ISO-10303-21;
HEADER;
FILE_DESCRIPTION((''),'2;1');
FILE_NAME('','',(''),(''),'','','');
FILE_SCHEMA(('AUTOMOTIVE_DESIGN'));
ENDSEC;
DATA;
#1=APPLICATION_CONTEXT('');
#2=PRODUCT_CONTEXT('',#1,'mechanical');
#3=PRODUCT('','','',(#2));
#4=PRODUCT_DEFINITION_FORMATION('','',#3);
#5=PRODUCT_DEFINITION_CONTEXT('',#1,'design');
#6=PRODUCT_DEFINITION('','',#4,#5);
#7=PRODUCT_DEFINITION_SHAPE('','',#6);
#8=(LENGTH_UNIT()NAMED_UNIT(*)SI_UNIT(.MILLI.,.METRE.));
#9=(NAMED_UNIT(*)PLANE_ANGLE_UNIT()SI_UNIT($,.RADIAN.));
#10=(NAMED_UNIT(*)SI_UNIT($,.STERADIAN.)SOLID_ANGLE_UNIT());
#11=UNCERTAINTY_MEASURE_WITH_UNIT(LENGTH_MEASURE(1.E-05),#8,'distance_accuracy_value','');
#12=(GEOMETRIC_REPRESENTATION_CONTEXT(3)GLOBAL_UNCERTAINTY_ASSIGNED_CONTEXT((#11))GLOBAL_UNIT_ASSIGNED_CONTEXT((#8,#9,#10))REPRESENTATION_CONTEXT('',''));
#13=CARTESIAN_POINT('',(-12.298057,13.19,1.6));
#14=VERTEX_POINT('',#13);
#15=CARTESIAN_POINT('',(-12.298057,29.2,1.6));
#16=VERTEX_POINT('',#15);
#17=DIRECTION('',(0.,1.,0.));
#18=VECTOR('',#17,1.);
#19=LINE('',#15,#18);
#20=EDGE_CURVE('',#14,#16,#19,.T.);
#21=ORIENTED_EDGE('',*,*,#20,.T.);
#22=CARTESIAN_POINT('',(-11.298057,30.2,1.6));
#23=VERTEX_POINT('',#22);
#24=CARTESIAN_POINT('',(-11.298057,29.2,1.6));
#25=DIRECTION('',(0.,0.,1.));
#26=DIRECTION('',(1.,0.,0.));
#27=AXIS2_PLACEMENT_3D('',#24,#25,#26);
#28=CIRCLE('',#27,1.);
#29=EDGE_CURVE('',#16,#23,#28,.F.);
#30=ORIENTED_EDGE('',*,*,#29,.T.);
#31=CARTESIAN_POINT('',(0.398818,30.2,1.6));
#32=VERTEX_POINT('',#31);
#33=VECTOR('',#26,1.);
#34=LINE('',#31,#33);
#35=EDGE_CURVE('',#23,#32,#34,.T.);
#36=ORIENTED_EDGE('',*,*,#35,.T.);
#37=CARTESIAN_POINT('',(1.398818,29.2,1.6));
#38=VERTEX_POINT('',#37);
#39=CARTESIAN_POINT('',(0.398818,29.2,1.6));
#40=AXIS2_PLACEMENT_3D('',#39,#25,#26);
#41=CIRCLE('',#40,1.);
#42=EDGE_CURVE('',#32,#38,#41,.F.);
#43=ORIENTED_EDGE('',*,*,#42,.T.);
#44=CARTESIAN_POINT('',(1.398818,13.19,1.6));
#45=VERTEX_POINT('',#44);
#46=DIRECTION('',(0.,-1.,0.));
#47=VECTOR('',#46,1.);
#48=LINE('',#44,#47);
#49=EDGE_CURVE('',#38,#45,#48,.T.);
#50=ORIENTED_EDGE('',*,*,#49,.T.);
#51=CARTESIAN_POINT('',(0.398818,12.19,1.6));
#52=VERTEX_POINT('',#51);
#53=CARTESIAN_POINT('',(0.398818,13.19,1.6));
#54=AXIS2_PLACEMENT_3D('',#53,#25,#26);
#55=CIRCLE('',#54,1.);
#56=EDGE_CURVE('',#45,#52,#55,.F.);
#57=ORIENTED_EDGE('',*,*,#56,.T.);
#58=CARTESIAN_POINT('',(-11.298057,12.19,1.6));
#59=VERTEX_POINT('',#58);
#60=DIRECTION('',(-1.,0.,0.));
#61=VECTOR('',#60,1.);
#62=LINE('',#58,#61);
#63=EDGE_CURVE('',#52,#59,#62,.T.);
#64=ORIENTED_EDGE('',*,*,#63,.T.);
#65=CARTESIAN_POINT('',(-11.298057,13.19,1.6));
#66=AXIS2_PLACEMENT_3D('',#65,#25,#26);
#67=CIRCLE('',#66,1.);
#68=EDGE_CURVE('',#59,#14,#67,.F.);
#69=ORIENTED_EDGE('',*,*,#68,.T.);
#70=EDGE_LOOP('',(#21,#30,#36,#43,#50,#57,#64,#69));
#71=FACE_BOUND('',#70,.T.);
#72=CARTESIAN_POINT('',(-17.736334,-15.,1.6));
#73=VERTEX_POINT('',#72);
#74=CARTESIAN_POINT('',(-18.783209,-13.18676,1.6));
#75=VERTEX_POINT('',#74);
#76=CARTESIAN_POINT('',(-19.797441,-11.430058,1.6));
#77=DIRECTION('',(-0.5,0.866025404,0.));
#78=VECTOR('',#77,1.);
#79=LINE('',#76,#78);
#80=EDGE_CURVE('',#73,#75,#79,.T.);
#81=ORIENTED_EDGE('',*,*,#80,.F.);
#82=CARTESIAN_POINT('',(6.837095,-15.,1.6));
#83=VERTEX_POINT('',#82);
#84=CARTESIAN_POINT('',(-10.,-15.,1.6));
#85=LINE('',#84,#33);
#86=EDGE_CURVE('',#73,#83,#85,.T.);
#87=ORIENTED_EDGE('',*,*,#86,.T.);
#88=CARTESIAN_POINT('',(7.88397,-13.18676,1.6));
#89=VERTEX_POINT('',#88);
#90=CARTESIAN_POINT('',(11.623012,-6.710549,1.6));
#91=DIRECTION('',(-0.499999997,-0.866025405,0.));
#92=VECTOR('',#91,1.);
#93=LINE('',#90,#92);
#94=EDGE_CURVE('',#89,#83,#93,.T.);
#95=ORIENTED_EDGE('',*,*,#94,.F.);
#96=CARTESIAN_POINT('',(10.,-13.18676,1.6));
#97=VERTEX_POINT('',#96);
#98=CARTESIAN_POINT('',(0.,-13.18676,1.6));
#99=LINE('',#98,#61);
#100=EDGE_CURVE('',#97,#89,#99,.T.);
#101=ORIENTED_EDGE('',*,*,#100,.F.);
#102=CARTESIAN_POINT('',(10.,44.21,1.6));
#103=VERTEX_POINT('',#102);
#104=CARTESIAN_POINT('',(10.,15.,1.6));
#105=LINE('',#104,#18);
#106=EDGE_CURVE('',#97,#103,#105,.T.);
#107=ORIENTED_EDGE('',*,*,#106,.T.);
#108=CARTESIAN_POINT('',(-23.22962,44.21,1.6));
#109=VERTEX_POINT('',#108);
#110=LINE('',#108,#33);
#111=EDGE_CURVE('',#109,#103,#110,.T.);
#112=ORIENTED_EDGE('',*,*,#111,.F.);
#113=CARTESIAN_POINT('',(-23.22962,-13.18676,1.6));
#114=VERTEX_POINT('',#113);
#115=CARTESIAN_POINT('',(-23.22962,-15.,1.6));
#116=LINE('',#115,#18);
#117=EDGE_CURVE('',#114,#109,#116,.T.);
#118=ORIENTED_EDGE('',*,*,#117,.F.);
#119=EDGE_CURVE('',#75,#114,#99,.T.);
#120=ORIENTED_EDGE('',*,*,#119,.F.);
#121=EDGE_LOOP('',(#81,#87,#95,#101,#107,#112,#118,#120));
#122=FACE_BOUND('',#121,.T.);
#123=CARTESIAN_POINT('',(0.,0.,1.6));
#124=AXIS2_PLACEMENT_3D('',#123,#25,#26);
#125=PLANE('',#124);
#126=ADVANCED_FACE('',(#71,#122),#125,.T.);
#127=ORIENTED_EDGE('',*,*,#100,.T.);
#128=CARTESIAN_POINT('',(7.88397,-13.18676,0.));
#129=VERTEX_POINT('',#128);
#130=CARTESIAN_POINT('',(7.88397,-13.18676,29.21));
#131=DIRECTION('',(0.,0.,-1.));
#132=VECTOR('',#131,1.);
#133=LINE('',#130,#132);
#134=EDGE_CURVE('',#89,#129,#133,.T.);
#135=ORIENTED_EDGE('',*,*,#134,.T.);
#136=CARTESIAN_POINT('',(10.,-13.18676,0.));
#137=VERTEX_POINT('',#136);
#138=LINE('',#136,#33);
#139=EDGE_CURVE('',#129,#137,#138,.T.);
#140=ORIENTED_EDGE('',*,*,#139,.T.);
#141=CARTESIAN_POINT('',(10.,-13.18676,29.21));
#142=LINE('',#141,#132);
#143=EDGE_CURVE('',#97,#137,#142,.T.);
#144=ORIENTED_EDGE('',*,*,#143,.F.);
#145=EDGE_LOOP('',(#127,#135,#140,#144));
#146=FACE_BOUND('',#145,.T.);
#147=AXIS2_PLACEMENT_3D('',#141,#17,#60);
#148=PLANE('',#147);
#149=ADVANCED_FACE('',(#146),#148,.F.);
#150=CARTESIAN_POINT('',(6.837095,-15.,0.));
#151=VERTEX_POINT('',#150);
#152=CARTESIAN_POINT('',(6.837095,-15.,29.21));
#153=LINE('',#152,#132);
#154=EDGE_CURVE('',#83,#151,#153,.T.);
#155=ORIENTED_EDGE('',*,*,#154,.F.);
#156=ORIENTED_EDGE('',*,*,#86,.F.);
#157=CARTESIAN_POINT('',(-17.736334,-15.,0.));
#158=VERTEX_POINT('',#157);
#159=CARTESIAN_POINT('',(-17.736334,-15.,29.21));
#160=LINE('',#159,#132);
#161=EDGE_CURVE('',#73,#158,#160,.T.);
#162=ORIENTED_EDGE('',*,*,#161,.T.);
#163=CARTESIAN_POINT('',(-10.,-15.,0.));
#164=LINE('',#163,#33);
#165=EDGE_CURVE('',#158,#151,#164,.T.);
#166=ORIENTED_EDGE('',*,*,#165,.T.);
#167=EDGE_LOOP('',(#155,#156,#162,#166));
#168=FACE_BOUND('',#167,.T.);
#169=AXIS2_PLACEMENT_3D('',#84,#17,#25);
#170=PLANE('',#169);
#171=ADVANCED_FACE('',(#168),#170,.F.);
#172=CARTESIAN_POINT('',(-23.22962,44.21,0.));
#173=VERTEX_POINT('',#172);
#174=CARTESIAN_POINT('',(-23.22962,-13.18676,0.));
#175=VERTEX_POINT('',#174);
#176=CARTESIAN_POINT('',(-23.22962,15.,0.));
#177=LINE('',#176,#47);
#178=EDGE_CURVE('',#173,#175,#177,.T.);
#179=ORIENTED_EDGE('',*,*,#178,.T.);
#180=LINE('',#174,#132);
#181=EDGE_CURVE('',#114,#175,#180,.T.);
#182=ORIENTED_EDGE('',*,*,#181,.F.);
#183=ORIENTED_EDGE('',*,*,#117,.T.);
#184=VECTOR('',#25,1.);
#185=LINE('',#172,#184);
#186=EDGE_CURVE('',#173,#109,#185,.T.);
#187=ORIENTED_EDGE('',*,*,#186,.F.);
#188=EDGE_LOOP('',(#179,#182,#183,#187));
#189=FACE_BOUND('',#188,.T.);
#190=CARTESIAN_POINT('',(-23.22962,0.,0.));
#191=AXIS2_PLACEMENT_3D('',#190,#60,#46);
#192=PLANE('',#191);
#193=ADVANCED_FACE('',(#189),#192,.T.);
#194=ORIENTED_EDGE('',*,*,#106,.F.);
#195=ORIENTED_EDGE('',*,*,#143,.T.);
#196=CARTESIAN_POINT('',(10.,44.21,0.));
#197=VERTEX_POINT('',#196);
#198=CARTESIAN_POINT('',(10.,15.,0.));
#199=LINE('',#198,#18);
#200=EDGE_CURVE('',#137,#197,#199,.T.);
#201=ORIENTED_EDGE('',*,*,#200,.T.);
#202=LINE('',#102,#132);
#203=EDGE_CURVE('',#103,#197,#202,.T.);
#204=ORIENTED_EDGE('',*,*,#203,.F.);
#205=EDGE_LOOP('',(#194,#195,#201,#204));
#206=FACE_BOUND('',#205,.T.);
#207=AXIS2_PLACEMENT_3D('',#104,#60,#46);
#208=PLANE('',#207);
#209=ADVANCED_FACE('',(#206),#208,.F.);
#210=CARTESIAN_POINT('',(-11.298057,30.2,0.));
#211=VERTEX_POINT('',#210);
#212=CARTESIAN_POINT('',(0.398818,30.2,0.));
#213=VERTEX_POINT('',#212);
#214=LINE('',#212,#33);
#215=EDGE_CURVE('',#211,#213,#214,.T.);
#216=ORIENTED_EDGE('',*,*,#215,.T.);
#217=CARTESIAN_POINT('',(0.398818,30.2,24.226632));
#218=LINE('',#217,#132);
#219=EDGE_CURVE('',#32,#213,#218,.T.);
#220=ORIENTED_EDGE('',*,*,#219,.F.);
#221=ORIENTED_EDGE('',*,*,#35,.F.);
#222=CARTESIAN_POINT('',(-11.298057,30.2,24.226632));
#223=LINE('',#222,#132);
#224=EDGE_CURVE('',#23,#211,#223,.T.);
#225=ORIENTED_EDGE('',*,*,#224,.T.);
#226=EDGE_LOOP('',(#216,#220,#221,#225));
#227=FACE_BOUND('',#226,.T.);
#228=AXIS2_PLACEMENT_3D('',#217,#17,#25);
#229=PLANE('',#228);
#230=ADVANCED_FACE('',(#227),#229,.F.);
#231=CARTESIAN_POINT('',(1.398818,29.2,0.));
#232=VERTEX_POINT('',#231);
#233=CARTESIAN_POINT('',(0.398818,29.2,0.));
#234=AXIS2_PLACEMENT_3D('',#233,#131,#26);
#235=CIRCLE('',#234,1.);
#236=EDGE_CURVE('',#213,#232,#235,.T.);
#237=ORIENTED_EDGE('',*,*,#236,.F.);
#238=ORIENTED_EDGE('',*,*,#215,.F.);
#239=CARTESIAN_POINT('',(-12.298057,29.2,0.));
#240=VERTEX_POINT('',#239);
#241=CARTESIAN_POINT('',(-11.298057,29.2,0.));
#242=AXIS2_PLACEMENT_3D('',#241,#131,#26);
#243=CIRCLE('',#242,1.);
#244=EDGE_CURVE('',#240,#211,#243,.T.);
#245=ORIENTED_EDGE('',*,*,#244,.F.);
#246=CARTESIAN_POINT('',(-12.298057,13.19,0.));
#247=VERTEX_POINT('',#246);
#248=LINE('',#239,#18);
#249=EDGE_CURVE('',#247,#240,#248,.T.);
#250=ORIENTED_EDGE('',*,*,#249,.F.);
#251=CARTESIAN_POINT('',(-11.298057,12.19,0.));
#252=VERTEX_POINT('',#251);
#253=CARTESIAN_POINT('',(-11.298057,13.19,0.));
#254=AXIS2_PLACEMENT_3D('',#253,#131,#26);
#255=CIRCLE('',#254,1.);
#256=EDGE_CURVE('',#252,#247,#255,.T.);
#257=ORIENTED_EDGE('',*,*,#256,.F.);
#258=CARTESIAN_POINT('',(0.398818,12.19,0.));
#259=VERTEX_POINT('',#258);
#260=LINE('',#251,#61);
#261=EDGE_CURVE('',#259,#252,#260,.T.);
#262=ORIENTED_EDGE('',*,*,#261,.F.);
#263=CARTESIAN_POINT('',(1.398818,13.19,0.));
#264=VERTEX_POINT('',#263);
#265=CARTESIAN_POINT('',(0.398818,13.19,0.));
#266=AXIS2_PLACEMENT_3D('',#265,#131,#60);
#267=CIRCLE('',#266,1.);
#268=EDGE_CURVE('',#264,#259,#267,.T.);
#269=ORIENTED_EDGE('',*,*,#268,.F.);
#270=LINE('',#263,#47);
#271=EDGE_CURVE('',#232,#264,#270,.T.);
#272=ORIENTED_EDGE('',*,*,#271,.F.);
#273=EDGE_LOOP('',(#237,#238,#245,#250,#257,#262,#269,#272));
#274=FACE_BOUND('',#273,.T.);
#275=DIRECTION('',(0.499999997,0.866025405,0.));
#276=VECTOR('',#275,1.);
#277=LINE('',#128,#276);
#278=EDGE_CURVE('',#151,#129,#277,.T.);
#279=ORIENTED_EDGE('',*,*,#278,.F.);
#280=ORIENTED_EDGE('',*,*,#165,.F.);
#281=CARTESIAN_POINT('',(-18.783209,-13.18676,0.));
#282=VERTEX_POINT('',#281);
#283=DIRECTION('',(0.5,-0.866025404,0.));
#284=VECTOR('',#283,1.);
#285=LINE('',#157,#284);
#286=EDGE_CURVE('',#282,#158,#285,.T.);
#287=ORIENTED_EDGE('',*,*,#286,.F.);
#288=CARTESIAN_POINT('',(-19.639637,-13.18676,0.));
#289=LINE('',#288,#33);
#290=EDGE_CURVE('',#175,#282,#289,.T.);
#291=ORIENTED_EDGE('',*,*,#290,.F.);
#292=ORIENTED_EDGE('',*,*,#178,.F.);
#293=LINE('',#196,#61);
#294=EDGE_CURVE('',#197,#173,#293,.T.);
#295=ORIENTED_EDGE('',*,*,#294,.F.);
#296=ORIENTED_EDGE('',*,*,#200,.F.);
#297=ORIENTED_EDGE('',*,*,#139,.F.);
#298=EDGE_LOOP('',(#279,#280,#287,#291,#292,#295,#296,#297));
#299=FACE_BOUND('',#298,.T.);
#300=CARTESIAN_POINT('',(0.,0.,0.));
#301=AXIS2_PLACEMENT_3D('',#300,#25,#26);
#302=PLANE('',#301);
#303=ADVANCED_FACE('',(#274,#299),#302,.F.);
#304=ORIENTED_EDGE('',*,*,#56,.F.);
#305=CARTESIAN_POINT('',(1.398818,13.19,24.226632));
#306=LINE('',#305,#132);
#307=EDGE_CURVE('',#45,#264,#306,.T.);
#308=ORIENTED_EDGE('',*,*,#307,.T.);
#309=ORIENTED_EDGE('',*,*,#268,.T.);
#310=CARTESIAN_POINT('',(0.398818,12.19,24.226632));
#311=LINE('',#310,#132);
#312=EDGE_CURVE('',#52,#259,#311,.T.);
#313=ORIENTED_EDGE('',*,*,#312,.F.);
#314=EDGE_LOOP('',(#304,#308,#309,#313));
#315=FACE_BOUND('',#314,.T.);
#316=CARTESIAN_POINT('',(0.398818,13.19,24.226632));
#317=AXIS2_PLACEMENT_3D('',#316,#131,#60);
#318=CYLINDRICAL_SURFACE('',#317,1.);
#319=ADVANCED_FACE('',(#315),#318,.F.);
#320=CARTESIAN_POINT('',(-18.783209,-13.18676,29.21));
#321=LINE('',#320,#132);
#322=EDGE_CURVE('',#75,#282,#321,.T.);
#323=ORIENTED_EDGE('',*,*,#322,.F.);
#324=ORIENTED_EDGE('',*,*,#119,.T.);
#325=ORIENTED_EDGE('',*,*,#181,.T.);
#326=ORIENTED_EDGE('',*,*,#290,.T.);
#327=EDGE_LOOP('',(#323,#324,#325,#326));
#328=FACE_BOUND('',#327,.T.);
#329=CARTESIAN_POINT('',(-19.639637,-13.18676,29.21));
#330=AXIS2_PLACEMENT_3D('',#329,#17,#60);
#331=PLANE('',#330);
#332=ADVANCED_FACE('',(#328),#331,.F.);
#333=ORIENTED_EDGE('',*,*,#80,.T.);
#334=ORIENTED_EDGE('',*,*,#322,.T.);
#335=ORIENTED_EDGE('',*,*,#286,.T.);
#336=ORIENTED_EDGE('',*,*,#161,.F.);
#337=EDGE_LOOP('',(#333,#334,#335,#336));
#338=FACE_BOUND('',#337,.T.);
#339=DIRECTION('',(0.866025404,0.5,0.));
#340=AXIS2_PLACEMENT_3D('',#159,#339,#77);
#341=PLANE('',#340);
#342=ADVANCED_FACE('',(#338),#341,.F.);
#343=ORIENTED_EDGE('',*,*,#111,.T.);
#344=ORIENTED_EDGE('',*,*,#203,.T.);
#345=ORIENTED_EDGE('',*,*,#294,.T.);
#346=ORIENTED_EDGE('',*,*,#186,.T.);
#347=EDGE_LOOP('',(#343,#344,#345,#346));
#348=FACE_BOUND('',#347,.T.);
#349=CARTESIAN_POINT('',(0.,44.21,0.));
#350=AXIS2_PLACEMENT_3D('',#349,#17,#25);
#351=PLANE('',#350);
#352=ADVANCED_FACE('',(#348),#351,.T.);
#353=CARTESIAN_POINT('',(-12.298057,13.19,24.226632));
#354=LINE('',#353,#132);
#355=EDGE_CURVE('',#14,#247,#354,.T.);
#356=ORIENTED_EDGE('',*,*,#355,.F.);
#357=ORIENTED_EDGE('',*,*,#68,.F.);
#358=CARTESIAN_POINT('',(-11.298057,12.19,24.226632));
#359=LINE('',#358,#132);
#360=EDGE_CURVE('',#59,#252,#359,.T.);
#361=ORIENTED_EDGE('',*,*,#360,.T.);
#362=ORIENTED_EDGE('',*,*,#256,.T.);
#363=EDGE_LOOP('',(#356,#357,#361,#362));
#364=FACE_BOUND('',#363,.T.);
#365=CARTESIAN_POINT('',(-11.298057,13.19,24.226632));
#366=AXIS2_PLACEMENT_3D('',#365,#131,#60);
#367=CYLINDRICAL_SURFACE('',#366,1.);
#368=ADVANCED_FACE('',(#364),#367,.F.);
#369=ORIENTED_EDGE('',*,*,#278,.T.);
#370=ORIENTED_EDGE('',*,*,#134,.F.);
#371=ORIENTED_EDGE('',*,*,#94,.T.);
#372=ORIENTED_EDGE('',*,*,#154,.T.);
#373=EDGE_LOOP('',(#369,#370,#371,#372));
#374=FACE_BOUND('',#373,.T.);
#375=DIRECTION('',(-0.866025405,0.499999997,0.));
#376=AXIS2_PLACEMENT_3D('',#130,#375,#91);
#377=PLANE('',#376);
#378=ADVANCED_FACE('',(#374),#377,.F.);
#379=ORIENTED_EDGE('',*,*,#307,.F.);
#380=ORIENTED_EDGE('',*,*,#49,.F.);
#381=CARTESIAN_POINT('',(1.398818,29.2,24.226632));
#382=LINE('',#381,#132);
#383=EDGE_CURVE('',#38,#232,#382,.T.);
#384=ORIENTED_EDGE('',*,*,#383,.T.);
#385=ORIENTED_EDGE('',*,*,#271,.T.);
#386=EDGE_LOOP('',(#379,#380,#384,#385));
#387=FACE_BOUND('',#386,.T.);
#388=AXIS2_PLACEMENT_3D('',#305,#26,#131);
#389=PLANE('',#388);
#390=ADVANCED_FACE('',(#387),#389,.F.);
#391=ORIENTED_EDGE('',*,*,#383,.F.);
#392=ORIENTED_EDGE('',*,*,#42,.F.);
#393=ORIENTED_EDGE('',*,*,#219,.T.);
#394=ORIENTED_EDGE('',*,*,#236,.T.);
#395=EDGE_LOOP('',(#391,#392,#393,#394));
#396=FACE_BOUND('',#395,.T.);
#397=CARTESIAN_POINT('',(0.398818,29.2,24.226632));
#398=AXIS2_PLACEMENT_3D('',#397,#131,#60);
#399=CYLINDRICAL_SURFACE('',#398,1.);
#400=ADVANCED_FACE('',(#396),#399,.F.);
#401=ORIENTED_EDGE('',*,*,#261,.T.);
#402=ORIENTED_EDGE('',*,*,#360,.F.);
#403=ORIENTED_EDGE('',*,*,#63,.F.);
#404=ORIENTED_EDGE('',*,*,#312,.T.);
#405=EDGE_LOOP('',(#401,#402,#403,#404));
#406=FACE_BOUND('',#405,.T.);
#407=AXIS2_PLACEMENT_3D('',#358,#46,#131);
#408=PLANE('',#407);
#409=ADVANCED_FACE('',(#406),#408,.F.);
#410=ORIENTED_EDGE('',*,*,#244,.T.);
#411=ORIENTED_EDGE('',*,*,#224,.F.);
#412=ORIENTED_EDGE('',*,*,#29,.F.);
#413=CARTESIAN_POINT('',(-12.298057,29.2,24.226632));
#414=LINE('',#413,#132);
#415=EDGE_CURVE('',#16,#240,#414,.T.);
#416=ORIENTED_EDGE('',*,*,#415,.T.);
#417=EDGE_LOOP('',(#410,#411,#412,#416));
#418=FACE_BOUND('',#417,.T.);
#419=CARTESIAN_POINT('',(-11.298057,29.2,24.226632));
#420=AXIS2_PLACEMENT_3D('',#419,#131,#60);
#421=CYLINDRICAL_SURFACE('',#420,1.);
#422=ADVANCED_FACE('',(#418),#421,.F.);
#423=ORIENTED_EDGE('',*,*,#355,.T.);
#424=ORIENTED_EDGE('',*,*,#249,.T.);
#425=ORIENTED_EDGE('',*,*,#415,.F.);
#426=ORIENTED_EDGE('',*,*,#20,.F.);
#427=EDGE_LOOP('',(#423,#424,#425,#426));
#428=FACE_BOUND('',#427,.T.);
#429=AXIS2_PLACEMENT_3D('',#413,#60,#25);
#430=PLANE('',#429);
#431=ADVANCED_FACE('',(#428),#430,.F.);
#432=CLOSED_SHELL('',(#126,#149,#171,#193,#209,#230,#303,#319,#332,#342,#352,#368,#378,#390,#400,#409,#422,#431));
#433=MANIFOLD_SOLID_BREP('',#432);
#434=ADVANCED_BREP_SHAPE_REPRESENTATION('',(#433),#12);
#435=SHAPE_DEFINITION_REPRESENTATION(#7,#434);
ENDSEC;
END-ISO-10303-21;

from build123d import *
from OCP.BRepAlgoAPI import BRepAlgoAPI_Cut
from OCP.TopTools import TopTools_ListOfShape

# Parameters (mm, degrees)
SKETCH1_W           = 20
SKETCH1_H           = 30
BOSS_EXTRUDE1_DEPTH = 1.6
SKETCH2_W           = 1.6
SKETCH2_H           = 30
BOSS_EXTRUDE2_DEPTH = 13.22962
SKETCH3_W           = 33.229619685
SKETCH3_H           = 1.6
BOSS_EXTRUDE3_DEPTH = 29.21
CUT_EXTRUDE1_DEPTH  = 1.6
CUT_EXTRUDE2_DEPTH  = 29.21


with BuildPart() as part:
    # Sketch1 → Boss-Extrude1 (new body)
    with BuildSketch(Plane.XY):
        Rectangle(SKETCH1_W, SKETCH1_H)
    extrude(amount=BOSS_EXTRUDE1_DEPTH)

    # Sketch2 → Boss-Extrude2 (add)
    with BuildSketch(Plane.ZY.offset(10)):
        with Locations((0.8, 0)):
            Rectangle(SKETCH2_W, SKETCH2_H)
    extrude(amount=BOSS_EXTRUDE2_DEPTH)

    # Sketch3 → Boss-Extrude3 (add)
    with BuildSketch(Plane(origin=(0, 15, 0), x_dir=(1, 0, 0), z_dir=(0, 1, 0))):
        with Locations((-6.614809843, -0.8)):
            Rectangle(SKETCH3_W, SKETCH3_H)
    extrude(amount=BOSS_EXTRUDE3_DEPTH)

    # Sketch4 → Cut-Extrude1 (cut)
    with BuildSketch(Plane(origin=(0, 0, 0), x_dir=(-1, 0, 0), z_dir=(0, 0, -1))):
        with BuildLine():
            Line((-1.398817815, 13.19), (-1.398817815, 29.2))
            ThreePointArc((-1.398817815, 29.2), (-1.105924597, 29.907106781), (-0.398817815, 30.2))
            Line((-0.398817815, 30.2), (11.298057185, 30.2))
            ThreePointArc((11.298057185, 30.2), (12.005163966, 29.907106781), (12.298057185, 29.2))
            Line((12.298057185, 29.2), (12.298057185, 13.19))
            ThreePointArc((12.298057185, 13.19), (12.005163966, 12.482893219), (11.298057185, 12.19))
            Line((11.298057185, 12.19), (-0.398817815, 12.19))
            ThreePointArc((-0.398817815, 12.19), (-1.105924597, 12.482893219), (-1.398817815, 13.19))
        make_face()
    extrude(amount=-CUT_EXTRUDE1_DEPTH, mode=Mode.SUBTRACT)


with BuildPart() as cut_extrude2_tool:
    # Sketch5 → Cut-Extrude2 (new body)
    with BuildSketch(Plane(origin=(0, 0, 0), x_dir=(-1, 0, 0), z_dir=(0, 0, -1))):
        Polygon((-7.883969717, -13.186759938), (-6.837095086, -15), (-10, -15), (-10, -13.186759938), align=None)
        Polygon((17.736334458, -15), (18.783209096, -13.186759938), (19.63963747, -13.186759938), (23.229619685, -13.186759938), (23.229619685, -15), align=None)
    extrude(amount=-CUT_EXTRUDE2_DEPTH)


with BuildPart() as part_1:
    add(part.part)

    # Cut-Extrude2: cut by cut_extrude2_tool, with a tolerance
    cut_extrude2_stock = TopTools_ListOfShape()
    cut_extrude2_stock.Append(part_1.part.wrapped)
    cut_extrude2_tools = TopTools_ListOfShape()
    cut_extrude2_tools.Append(cut_extrude2_tool.part.wrapped)
    cut_extrude2_cut = BRepAlgoAPI_Cut()
    cut_extrude2_cut.SetArguments(cut_extrude2_stock)
    cut_extrude2_cut.SetTools(cut_extrude2_tools)
    cut_extrude2_cut.SetFuzzyValue(0.00001)
    cut_extrude2_cut.Build()
    add(Compound.cast(cut_extrude2_cut.Shape()).solids(), mode=Mode.REPLACE)


solid = part_1.part
